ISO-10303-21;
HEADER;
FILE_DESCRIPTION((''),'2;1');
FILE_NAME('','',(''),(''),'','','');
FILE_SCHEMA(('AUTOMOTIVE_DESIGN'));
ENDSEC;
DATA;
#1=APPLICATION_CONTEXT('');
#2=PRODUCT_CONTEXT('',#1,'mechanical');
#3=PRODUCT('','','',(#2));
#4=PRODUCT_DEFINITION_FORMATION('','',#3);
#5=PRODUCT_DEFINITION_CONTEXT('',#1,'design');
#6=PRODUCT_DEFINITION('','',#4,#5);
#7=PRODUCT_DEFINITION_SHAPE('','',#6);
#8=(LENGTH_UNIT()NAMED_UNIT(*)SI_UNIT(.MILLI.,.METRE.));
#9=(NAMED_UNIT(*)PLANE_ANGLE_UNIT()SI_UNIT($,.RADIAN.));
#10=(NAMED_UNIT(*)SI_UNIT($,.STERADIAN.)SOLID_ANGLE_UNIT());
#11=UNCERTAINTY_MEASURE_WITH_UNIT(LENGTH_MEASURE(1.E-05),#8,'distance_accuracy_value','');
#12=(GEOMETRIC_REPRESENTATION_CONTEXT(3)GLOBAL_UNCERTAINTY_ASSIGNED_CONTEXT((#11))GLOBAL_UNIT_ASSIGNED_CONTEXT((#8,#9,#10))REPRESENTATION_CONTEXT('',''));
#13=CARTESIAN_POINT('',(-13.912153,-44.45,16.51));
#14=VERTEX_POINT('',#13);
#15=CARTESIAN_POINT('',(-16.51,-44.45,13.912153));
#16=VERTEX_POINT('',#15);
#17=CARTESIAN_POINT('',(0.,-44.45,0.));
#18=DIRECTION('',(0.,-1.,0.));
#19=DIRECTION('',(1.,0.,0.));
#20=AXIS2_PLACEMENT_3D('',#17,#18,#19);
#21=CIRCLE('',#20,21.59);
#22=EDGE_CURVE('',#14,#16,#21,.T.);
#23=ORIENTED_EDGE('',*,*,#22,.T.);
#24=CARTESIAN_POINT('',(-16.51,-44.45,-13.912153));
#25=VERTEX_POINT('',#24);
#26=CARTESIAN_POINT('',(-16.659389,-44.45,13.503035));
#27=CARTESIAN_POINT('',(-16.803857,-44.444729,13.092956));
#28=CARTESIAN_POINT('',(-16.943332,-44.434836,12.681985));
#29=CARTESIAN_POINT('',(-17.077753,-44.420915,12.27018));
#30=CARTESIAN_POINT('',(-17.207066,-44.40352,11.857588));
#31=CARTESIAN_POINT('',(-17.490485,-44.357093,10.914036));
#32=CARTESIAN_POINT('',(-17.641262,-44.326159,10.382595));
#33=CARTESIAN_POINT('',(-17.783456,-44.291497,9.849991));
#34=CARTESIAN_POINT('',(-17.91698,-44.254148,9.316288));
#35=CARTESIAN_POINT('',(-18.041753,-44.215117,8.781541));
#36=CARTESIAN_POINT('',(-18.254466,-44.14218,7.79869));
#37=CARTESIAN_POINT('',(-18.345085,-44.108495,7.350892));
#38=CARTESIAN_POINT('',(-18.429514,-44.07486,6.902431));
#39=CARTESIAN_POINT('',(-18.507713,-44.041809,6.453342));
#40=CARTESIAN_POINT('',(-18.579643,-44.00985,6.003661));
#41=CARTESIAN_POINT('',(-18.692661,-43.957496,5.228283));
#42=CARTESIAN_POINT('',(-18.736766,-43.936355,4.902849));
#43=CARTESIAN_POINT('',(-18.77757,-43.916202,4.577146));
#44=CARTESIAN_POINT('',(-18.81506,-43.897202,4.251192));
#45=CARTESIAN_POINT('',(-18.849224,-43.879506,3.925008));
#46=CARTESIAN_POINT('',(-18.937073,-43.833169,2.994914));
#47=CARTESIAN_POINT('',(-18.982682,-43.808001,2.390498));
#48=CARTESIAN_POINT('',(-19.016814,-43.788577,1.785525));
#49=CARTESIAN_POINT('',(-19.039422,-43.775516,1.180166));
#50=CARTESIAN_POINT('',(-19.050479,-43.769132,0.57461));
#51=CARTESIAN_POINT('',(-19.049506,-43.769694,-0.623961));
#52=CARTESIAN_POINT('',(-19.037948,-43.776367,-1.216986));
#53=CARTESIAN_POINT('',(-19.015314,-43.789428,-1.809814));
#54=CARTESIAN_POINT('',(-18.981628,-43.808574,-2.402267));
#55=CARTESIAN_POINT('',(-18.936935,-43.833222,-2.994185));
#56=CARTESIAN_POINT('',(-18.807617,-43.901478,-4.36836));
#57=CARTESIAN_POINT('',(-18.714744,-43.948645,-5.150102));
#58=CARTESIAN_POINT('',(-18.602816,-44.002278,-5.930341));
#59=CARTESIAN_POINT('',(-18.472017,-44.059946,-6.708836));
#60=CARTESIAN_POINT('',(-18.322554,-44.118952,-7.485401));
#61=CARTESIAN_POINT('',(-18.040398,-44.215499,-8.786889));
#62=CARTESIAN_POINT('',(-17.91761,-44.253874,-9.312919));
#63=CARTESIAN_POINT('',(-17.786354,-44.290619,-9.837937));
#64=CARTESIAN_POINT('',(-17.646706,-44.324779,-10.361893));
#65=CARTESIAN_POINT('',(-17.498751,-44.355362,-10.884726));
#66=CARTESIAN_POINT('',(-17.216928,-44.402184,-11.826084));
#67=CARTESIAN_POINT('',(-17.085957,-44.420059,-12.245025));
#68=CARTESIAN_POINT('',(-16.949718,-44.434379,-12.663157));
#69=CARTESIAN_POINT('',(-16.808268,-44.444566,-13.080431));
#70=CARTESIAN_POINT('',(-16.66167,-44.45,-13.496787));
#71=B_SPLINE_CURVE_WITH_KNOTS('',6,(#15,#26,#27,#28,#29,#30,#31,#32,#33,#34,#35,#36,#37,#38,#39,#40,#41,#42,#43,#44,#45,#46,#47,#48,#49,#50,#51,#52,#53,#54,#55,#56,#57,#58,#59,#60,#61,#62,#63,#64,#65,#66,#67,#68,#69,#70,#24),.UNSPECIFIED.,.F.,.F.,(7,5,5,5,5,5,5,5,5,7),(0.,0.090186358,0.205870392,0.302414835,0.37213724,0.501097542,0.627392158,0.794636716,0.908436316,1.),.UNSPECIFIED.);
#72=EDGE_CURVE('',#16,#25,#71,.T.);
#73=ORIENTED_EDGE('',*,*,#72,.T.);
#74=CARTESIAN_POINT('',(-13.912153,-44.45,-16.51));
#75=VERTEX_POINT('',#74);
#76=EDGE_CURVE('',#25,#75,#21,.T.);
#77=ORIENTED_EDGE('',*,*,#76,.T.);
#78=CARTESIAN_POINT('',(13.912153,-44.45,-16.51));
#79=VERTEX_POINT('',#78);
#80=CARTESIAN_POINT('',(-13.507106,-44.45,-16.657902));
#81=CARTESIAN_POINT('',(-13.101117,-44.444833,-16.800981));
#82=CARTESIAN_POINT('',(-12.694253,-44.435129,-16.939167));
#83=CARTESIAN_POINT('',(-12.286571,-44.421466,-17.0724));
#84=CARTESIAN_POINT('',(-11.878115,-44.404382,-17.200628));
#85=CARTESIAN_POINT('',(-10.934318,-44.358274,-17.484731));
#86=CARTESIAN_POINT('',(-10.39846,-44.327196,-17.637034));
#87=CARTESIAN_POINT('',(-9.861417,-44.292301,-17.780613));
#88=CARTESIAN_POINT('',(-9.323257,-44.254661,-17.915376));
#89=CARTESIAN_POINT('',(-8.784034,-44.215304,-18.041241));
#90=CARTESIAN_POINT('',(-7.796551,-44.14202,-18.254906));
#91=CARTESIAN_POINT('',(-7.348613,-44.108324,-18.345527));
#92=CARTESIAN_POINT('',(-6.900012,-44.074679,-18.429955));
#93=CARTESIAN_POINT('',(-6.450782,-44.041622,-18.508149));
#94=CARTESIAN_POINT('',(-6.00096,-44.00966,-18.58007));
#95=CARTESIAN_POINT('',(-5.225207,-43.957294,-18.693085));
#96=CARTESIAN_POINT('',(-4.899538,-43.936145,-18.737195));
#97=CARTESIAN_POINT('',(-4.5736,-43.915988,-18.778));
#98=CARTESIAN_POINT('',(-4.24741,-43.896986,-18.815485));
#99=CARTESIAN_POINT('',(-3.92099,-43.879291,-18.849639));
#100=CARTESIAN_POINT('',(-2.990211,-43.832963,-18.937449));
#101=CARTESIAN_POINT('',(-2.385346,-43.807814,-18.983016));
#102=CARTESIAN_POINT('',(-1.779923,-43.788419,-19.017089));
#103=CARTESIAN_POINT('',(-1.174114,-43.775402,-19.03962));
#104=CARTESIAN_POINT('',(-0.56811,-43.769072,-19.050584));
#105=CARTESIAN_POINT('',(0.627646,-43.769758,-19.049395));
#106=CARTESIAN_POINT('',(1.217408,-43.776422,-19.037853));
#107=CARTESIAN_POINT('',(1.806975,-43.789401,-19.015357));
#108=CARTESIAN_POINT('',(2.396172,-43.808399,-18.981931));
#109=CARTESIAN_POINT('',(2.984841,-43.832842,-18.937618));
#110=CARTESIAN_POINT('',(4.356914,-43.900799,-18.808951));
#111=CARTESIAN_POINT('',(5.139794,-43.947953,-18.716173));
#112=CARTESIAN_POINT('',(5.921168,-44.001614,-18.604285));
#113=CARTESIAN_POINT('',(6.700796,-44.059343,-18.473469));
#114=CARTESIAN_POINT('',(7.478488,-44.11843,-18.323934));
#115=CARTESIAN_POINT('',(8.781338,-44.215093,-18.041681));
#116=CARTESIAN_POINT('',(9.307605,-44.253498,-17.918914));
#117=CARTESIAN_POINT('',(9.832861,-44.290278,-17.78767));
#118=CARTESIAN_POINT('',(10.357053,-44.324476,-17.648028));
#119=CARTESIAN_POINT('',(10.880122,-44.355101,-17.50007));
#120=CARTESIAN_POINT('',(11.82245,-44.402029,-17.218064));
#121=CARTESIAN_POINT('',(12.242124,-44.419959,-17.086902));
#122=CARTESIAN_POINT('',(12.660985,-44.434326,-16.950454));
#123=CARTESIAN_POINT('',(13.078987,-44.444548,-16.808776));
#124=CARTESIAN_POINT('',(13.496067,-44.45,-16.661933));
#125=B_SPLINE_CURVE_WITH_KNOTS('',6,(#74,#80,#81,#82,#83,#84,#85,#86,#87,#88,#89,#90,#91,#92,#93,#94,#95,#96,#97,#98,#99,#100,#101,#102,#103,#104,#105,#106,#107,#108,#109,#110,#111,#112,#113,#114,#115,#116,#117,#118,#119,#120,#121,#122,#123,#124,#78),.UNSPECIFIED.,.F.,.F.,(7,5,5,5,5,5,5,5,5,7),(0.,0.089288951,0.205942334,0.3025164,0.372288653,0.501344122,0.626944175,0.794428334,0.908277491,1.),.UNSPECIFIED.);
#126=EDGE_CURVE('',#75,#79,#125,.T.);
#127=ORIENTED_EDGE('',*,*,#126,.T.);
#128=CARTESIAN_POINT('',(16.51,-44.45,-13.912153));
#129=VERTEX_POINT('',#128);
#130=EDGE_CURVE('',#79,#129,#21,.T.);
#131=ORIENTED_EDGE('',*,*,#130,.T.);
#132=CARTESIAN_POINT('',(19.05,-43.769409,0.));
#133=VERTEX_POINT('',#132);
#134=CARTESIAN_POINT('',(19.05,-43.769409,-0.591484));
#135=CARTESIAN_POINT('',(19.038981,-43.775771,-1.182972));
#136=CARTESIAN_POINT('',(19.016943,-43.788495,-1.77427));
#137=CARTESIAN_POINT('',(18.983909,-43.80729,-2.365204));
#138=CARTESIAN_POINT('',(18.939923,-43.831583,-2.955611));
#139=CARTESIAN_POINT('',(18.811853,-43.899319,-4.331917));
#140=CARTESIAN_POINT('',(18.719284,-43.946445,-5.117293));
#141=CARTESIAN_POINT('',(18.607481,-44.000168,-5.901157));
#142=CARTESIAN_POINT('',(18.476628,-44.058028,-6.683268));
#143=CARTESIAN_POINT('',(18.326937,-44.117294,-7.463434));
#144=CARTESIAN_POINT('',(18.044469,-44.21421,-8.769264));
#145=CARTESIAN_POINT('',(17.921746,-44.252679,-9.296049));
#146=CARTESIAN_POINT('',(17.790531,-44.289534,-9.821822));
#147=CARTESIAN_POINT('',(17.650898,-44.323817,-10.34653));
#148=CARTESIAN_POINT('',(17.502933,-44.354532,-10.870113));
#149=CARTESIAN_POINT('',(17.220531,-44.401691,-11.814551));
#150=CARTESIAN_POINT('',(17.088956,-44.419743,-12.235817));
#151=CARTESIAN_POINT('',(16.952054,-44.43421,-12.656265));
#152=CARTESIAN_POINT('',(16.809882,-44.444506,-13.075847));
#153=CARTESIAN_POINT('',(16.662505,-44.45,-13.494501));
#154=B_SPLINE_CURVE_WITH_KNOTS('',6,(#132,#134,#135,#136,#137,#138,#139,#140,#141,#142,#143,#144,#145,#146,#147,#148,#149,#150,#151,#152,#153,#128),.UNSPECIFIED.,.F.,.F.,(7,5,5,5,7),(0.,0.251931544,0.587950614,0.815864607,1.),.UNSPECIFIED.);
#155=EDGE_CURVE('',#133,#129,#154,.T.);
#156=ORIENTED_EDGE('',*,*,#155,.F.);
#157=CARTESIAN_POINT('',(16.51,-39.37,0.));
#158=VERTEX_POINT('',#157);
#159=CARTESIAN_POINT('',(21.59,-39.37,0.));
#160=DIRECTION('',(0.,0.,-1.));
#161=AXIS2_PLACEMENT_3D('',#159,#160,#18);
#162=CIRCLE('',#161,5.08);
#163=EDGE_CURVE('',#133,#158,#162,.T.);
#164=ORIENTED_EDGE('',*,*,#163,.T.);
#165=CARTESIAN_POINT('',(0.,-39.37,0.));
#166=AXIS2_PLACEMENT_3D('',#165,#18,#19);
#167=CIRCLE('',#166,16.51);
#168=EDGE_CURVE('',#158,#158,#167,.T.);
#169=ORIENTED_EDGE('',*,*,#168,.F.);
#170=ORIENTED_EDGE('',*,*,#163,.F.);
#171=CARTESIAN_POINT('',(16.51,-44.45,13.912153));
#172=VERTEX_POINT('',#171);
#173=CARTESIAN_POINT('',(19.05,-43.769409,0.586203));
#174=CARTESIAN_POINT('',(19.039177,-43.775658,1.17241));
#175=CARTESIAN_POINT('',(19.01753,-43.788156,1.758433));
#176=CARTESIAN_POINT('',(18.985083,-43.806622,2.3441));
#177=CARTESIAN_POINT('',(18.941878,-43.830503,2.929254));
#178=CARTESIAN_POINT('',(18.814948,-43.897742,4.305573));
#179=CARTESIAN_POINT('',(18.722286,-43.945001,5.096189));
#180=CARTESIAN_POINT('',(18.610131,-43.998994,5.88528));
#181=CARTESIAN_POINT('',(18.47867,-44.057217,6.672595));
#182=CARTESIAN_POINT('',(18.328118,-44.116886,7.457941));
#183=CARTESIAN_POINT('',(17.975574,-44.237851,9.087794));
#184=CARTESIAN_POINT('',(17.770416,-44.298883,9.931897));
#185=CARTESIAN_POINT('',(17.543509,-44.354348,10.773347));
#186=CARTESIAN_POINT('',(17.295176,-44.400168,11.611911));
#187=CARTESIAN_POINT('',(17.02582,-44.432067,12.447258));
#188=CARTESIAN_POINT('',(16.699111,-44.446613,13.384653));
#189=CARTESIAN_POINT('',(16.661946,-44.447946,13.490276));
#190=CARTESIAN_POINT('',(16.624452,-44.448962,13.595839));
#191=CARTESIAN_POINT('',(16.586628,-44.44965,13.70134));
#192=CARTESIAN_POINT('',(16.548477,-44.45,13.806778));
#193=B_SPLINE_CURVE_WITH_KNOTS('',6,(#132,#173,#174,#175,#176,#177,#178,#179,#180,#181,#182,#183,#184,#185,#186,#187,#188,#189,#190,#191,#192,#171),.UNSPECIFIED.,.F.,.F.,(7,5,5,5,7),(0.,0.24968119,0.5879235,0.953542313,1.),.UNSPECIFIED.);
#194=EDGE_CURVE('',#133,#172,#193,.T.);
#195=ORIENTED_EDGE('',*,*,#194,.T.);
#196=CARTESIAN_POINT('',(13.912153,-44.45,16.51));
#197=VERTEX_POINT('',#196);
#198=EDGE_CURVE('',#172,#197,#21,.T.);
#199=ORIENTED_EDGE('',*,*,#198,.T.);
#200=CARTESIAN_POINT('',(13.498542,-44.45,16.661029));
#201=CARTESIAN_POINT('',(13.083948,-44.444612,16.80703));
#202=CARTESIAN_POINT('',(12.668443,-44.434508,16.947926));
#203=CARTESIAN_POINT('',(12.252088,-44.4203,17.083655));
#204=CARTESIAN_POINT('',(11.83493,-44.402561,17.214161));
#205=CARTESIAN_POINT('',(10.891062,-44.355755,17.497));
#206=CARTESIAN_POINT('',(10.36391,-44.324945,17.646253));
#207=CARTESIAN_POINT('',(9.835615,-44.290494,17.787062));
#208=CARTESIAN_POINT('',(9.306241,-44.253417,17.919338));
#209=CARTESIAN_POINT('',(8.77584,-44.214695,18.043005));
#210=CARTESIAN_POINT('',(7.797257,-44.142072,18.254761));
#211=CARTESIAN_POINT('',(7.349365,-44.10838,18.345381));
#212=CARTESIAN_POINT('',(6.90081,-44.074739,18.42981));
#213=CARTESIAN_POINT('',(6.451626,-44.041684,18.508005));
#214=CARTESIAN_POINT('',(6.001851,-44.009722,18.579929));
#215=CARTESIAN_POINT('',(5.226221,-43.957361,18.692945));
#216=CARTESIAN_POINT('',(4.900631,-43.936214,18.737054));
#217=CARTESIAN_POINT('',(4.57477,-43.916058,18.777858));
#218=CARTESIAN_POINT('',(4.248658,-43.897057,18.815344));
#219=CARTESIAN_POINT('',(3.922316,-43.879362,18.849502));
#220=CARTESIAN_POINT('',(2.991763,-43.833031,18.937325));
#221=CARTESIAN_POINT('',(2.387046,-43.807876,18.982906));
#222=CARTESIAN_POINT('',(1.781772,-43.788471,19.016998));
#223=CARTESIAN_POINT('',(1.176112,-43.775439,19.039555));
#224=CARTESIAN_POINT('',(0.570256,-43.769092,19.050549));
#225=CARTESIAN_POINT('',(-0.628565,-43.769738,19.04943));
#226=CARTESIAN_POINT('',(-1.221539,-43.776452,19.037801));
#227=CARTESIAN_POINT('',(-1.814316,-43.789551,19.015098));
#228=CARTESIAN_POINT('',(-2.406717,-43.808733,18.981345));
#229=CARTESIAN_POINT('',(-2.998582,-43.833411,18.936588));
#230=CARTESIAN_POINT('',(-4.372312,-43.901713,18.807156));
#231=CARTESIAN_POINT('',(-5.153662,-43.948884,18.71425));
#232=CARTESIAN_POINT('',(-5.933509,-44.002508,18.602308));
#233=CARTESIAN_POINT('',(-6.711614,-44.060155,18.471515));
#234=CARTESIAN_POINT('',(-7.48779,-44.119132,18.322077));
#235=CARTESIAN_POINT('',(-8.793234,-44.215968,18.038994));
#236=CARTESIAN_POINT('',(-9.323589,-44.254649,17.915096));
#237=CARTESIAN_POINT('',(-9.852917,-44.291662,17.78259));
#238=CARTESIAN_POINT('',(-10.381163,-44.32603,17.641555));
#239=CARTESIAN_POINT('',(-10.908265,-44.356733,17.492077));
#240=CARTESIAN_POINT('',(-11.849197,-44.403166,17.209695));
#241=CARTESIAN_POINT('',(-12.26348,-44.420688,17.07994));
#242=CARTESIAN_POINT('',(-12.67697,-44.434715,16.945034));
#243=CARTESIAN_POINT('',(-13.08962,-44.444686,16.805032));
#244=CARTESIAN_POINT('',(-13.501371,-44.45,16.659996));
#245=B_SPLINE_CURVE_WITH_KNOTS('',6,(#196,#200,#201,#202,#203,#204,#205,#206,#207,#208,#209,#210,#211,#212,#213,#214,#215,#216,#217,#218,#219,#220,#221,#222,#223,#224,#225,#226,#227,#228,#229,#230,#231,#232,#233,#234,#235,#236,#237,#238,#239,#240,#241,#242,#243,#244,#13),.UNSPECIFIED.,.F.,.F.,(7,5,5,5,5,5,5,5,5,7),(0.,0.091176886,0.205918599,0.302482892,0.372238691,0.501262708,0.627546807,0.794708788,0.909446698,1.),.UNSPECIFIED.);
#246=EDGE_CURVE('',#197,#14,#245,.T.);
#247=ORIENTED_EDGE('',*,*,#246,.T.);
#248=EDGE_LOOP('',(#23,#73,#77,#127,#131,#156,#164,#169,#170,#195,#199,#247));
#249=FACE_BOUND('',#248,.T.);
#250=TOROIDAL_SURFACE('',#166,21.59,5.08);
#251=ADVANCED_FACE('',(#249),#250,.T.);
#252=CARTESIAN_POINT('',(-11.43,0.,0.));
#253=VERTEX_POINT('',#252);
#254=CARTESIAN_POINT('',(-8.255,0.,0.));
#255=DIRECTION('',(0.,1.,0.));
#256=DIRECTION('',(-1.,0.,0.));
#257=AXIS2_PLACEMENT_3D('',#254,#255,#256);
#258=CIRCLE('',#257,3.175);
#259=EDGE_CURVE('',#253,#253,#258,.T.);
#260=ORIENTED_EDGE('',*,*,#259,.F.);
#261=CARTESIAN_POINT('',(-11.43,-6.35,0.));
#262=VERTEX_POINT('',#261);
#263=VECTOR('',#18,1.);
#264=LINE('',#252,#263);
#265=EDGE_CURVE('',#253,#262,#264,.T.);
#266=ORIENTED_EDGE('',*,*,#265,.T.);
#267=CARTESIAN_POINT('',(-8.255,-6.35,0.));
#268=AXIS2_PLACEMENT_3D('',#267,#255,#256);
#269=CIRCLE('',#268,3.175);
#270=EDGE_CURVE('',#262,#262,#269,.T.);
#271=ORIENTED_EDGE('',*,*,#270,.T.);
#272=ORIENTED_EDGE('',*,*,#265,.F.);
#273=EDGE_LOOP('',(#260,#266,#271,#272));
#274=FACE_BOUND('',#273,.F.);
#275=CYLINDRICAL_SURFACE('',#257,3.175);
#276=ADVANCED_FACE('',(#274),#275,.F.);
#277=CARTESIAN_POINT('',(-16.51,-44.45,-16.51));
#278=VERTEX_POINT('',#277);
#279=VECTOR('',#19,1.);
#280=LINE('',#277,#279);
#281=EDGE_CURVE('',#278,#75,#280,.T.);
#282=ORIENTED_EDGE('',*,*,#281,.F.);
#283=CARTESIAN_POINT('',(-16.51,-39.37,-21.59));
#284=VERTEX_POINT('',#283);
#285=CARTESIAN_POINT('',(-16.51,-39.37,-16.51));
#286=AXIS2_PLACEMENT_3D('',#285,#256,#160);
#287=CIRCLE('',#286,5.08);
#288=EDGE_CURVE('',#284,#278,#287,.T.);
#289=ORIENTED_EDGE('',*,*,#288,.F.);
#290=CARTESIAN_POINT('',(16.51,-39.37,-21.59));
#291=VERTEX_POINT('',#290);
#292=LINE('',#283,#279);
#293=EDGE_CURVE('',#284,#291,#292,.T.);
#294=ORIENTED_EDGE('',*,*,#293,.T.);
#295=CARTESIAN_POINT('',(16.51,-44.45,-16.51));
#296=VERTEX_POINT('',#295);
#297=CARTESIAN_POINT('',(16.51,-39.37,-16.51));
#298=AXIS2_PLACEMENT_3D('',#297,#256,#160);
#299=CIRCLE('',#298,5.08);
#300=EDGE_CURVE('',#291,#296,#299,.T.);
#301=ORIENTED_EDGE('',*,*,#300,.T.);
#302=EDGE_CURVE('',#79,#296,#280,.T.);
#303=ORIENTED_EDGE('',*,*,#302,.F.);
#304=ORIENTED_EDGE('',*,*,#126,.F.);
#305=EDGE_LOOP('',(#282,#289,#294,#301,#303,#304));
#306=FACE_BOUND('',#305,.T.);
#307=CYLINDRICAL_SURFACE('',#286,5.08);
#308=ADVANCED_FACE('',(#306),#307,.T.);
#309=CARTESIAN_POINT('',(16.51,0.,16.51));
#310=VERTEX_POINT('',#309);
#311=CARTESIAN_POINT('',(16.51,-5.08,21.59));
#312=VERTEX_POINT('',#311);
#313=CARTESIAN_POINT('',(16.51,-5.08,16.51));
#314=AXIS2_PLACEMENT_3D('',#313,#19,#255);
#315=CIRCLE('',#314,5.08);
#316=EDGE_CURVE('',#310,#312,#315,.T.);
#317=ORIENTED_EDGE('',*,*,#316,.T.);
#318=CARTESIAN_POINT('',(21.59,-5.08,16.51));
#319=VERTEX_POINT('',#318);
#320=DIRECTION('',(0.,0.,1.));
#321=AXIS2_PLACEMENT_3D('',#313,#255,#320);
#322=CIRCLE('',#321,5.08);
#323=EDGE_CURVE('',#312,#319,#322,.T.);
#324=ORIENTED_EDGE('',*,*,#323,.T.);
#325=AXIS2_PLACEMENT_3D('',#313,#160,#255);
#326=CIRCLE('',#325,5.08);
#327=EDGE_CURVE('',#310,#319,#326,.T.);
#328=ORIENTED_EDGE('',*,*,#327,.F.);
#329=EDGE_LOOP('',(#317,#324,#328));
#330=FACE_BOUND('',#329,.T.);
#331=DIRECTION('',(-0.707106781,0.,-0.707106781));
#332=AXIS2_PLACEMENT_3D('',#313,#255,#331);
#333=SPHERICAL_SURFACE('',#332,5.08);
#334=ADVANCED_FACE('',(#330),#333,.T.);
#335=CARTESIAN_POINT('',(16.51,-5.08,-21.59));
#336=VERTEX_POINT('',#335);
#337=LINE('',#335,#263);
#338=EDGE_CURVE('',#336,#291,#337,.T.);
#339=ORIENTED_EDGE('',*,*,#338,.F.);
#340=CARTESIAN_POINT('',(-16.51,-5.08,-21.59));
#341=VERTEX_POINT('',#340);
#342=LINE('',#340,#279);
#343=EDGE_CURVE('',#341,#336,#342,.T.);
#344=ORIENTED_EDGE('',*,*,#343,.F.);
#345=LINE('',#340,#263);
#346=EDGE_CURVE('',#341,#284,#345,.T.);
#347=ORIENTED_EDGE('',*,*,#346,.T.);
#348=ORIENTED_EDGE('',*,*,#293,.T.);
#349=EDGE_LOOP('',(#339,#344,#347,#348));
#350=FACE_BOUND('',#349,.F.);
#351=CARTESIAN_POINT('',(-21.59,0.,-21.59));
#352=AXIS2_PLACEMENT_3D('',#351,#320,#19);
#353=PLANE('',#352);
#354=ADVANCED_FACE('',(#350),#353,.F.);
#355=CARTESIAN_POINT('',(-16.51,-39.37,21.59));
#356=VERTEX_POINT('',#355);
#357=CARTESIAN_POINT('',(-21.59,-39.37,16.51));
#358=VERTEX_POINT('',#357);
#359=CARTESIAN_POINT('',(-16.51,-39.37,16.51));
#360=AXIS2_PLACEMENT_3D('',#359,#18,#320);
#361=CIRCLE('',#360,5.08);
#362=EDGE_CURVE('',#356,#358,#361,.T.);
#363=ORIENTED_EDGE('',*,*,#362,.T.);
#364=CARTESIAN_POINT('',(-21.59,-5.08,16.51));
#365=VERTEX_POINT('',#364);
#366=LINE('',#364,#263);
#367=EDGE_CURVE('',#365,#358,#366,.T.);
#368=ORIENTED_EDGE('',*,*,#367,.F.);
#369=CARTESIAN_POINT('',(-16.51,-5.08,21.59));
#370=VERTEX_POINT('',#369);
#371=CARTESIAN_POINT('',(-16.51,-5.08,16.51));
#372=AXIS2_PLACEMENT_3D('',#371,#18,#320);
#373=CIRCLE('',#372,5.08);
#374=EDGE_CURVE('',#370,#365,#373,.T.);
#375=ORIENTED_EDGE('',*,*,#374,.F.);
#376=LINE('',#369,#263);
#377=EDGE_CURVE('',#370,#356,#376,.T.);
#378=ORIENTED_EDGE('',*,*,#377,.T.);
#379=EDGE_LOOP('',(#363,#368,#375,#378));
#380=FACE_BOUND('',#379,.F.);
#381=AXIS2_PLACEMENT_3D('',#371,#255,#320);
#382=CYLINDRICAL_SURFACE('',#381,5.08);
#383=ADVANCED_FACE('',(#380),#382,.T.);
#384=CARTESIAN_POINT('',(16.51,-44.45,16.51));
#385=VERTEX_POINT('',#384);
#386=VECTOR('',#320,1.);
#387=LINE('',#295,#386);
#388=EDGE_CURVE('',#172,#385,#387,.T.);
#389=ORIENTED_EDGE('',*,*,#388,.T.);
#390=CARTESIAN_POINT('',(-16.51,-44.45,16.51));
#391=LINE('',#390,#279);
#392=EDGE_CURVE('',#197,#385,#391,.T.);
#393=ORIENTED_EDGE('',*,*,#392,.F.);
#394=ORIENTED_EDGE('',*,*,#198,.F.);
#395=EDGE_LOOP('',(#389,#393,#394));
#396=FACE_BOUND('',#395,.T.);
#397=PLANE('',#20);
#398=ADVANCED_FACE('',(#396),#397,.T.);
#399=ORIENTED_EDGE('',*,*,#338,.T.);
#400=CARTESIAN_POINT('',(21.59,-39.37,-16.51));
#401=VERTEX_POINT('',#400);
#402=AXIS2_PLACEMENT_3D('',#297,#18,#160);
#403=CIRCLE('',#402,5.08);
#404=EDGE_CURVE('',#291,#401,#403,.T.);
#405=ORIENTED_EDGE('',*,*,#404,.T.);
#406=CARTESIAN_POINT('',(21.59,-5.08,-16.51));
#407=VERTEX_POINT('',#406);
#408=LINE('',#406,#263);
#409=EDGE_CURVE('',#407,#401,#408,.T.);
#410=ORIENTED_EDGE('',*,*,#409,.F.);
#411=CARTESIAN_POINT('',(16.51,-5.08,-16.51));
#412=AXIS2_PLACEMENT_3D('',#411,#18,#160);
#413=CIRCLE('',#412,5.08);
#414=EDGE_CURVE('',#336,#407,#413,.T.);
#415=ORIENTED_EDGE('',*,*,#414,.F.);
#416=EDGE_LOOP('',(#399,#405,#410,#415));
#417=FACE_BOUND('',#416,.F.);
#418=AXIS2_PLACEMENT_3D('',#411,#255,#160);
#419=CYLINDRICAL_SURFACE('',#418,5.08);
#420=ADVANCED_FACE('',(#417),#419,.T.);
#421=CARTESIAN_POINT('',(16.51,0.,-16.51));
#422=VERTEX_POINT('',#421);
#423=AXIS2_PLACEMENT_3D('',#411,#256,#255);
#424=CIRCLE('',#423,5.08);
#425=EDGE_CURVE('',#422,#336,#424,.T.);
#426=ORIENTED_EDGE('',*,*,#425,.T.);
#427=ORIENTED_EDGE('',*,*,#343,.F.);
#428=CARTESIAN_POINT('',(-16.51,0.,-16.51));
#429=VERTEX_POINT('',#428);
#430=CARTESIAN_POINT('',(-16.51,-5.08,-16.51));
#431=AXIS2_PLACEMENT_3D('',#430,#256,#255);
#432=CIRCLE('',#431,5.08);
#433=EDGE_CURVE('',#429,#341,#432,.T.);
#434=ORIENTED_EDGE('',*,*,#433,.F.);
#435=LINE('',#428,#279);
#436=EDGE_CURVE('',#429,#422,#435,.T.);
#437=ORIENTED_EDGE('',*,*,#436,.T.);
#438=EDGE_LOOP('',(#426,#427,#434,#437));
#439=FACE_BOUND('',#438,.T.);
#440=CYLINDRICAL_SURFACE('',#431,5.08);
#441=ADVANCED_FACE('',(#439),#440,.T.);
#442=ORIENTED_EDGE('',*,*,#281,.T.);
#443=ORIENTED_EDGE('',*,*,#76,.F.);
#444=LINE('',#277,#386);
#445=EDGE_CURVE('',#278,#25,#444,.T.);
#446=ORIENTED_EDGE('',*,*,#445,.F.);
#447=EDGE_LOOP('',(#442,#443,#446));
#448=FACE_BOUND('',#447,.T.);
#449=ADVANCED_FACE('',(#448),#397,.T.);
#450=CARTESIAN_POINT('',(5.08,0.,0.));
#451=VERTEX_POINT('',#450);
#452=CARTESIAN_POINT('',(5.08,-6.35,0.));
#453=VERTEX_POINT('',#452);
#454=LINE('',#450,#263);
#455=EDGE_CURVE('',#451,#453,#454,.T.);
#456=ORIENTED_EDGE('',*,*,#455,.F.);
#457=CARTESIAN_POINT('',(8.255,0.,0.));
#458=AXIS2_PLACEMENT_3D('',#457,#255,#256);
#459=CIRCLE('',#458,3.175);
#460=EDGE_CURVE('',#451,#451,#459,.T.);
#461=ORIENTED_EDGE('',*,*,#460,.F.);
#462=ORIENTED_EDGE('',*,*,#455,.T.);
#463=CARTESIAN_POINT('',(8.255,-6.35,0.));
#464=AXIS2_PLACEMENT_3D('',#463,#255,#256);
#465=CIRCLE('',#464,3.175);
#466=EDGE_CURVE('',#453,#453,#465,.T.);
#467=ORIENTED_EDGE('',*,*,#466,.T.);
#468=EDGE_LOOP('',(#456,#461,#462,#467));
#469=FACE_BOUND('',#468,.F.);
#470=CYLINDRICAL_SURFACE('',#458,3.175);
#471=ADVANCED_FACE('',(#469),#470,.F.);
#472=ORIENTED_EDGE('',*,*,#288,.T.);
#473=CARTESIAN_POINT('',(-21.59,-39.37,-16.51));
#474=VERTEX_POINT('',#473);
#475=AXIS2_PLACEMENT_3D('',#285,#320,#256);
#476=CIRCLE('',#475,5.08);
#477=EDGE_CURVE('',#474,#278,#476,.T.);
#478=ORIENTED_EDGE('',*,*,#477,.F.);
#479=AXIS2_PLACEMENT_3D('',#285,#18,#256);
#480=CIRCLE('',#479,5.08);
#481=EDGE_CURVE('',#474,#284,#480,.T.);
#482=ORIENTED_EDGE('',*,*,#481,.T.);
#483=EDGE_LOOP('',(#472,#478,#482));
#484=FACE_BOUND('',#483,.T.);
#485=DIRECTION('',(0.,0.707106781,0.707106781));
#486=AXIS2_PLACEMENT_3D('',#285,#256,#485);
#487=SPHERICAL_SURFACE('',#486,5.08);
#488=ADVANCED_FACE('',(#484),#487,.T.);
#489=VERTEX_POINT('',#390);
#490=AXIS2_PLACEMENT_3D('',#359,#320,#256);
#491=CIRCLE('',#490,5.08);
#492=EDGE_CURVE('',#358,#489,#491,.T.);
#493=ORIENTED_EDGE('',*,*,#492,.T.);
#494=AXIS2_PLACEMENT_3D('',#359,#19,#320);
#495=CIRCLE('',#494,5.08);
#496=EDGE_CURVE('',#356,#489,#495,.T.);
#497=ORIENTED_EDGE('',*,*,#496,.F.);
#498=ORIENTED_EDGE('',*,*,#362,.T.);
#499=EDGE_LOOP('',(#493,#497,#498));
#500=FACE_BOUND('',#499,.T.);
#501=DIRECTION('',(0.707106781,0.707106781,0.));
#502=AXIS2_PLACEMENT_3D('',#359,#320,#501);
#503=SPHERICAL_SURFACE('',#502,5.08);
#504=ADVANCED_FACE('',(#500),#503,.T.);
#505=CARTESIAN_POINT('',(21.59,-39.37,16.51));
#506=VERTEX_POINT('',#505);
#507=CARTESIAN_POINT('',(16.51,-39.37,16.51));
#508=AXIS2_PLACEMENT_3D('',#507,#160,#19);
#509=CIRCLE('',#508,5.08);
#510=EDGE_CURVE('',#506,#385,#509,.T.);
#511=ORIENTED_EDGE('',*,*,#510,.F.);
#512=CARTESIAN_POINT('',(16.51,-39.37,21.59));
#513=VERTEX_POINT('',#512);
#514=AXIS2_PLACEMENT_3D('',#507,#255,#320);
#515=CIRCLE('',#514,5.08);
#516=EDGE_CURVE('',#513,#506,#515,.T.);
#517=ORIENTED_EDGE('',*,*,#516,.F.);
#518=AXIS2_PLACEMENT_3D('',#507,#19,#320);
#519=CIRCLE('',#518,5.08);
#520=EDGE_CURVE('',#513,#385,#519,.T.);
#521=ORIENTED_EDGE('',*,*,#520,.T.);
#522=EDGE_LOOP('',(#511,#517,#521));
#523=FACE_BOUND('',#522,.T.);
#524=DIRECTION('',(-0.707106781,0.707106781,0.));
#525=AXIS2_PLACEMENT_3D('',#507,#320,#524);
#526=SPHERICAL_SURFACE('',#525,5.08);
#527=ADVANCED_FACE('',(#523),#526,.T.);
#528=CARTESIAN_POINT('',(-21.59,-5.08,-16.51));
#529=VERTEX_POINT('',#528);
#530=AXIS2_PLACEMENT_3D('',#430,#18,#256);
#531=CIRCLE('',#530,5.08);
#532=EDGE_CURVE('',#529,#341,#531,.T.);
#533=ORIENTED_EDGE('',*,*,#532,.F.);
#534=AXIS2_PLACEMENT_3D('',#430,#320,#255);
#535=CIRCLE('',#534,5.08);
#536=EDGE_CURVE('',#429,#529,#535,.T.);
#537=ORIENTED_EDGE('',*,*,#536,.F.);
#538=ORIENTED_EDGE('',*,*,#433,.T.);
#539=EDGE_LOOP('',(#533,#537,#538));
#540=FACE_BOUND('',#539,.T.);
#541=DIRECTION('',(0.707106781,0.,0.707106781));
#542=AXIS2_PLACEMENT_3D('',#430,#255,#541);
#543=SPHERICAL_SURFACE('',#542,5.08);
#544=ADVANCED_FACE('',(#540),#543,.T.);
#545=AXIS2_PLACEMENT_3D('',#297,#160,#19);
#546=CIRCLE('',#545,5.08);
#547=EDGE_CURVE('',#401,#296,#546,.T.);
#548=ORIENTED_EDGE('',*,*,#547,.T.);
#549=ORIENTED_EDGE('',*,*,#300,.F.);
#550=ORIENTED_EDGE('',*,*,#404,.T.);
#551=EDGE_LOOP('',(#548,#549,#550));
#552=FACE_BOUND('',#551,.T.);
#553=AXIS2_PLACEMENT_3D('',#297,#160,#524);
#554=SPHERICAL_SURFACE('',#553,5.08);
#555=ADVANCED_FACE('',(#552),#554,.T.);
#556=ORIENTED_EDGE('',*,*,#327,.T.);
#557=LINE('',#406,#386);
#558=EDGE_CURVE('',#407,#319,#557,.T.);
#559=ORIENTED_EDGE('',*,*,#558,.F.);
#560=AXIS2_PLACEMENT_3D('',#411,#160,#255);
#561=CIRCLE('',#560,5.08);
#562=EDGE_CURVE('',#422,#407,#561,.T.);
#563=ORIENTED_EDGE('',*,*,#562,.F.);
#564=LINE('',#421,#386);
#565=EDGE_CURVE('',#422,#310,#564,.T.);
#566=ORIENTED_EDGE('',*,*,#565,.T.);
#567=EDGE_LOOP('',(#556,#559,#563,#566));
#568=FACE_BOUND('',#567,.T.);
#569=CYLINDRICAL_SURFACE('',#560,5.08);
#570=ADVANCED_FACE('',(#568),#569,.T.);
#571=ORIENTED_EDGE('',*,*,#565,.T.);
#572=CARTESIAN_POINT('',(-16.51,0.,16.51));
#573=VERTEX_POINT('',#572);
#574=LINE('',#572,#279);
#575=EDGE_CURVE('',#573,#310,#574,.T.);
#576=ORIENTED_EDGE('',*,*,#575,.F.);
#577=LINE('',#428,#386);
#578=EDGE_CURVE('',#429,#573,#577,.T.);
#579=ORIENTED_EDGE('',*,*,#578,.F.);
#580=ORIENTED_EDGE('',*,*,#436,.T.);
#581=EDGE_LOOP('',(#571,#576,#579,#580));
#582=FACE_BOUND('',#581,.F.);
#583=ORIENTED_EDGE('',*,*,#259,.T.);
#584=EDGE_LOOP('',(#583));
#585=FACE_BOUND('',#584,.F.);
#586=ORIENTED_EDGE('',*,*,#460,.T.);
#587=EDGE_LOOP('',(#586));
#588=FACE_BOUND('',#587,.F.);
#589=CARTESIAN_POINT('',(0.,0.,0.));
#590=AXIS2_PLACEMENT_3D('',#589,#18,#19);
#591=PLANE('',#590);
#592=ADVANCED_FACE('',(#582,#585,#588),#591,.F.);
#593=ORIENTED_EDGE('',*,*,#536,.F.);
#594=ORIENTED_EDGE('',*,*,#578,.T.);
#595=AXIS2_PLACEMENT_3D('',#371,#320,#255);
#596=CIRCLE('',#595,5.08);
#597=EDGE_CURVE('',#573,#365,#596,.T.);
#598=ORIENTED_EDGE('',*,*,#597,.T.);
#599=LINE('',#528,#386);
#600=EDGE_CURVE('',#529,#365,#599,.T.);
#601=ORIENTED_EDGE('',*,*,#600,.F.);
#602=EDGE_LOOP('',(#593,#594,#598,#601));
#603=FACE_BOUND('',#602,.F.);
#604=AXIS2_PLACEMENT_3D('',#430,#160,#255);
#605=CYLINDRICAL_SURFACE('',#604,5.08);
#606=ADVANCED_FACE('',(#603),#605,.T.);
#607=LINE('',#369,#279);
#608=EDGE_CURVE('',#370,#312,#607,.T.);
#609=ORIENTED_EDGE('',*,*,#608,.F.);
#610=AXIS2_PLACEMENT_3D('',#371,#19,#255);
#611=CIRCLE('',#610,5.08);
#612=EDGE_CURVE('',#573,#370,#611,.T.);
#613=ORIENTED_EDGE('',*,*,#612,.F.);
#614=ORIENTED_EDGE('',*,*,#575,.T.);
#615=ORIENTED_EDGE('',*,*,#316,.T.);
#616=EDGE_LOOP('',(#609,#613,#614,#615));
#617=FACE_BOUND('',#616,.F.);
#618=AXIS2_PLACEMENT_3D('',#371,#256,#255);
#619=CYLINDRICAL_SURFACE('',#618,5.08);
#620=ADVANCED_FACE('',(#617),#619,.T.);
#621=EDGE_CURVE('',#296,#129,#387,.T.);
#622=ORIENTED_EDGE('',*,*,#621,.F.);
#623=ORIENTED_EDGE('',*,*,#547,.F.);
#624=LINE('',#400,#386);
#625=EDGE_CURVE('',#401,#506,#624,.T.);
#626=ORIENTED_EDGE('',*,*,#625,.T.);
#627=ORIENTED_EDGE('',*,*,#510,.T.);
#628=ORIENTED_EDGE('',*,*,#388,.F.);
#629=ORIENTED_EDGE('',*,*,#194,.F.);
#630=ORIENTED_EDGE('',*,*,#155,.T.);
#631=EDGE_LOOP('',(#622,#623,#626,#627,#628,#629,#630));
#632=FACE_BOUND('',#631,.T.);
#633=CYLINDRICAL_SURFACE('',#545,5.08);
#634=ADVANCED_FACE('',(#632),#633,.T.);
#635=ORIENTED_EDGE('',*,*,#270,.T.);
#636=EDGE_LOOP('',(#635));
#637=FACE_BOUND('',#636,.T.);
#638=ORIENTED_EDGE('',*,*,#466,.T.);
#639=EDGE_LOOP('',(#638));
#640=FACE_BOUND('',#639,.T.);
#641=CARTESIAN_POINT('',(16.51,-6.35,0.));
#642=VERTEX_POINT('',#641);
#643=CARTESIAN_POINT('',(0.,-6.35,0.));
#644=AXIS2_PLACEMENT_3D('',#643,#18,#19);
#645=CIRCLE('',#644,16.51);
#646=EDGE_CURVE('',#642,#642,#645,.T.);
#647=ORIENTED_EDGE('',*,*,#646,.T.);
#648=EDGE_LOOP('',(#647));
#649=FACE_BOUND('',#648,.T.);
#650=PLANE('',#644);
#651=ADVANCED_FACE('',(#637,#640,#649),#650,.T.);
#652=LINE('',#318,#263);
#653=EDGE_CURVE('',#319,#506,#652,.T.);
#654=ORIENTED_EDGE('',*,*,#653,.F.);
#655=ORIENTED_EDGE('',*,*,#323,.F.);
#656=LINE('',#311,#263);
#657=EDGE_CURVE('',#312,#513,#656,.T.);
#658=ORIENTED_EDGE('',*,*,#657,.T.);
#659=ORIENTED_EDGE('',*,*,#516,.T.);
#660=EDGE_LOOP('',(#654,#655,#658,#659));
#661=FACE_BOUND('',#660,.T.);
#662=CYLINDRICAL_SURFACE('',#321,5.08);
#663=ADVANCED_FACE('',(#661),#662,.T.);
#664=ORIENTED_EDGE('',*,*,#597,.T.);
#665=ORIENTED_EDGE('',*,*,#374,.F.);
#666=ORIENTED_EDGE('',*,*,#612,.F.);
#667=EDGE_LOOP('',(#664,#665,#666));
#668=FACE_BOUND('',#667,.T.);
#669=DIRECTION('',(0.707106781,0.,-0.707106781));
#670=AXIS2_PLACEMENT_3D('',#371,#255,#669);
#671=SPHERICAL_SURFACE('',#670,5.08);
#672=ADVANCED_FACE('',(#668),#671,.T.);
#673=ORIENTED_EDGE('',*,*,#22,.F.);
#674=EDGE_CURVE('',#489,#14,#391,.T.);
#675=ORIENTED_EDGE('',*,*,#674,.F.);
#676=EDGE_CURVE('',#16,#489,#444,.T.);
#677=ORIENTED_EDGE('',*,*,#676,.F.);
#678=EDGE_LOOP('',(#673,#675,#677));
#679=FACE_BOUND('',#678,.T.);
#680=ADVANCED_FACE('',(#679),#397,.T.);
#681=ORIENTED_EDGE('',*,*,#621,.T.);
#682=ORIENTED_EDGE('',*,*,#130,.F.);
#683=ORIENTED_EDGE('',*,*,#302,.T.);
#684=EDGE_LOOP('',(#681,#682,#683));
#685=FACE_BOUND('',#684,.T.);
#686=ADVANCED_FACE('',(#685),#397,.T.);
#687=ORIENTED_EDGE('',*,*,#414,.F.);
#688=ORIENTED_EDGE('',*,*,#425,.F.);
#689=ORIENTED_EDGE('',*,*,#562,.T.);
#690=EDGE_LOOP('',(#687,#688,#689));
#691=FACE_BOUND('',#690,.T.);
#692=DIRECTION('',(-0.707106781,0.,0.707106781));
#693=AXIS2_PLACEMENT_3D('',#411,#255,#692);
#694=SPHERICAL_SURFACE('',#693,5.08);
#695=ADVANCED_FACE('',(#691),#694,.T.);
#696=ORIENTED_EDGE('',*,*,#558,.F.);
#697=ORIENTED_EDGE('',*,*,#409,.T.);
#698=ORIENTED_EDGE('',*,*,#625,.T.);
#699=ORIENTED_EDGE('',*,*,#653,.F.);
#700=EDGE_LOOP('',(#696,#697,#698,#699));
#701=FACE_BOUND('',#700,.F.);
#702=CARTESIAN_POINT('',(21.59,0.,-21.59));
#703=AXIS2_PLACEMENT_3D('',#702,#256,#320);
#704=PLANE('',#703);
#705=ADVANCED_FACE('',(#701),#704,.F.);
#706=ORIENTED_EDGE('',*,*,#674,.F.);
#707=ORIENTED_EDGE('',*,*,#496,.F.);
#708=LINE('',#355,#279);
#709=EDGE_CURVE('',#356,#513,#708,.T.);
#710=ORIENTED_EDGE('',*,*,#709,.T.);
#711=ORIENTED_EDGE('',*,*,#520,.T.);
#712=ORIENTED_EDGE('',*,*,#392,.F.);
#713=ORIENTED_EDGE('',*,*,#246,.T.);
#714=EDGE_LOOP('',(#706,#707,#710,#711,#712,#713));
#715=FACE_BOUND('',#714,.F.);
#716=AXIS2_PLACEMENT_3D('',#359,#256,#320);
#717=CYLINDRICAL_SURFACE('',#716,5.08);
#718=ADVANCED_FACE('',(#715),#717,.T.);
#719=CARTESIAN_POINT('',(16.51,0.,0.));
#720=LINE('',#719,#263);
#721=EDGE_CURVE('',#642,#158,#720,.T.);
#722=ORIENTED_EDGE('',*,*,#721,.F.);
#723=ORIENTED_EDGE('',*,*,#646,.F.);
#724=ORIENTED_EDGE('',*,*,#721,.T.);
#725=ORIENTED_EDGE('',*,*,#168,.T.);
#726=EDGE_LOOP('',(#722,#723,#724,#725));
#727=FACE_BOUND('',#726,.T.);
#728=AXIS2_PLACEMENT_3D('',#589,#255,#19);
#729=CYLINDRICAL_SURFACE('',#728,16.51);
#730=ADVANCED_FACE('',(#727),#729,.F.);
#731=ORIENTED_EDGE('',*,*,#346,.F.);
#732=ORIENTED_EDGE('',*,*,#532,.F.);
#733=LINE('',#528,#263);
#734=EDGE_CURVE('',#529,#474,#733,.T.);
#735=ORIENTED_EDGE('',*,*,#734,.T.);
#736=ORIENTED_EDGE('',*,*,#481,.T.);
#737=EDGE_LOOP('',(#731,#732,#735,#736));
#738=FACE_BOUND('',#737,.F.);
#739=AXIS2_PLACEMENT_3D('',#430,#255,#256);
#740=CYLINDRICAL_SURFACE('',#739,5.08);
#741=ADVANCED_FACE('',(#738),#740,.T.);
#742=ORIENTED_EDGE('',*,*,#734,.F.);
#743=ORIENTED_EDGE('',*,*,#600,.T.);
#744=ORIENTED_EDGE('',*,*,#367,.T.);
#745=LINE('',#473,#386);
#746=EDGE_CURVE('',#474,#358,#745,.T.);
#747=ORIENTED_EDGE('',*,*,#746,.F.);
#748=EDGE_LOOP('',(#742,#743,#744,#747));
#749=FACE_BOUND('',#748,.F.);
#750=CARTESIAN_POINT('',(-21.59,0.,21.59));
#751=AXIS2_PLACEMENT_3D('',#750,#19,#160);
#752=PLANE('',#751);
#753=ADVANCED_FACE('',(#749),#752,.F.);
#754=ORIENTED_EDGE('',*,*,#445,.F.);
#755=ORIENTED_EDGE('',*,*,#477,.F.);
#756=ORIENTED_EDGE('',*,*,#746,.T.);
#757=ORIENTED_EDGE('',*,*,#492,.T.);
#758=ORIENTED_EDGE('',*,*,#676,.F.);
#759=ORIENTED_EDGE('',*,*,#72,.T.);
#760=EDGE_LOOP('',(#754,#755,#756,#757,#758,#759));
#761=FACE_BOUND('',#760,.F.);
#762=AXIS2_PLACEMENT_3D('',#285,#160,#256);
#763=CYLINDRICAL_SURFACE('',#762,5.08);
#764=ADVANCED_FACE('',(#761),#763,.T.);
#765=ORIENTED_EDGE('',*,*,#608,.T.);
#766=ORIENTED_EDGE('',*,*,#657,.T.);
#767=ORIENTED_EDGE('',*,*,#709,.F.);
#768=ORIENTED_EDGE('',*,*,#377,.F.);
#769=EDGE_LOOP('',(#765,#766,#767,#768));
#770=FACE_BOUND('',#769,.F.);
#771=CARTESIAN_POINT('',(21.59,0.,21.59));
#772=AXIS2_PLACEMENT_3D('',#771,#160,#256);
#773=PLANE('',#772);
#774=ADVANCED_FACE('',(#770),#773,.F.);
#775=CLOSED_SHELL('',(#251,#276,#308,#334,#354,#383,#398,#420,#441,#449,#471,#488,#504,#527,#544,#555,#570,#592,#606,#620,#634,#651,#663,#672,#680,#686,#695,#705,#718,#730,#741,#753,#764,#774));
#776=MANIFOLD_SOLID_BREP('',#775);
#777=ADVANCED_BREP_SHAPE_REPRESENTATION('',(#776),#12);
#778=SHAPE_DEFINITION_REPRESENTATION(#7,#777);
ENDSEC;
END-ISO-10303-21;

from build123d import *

# Parameters (mm, degrees)
F0_R         = 16.51
F1_DEPTH     = 6.35
F2_DEPTH     = 44.45
F3_T1_DEPTH  = 34.29
F3_T3_DEPTH  = 33.02
F3_T5_DEPTH  = 33.02
F3_S9_W      = 5.08
F3_S9_H      = 5.08
F3_T10_DEPTH = 5.08
F3_S15_W     = 5.08
F3_S15_H     = 5.08
F3_T16_DEPTH = 5.08
F3_S21_W     = 5.08
F3_S21_H     = 5.08
F3_T22_DEPTH = 5.08
F3_S27_W     = 5.08
F3_S27_H     = 5.08
F3_T28_DEPTH = 5.08
F3_S33_W     = 5.08
F3_S33_H     = 5.08
F3_T34_DEPTH = 5.08
F3_S39_W     = 5.08
F3_S39_H     = 5.08
F3_T40_DEPTH = 5.08
F3_S45_W     = 5.08
F3_S45_H     = 5.08
F3_T46_DEPTH = 5.08
F3_S51_W     = 5.08
F3_S51_H     = 5.08
F3_T52_DEPTH = 5.08
F4_R         = 3.175
F5_DEPTH     = 25.4


# Not quite as in the source:
# - a fillet or chamfer that OpenCascade refuses, or shapes differently, is made with other operations: its cross-section is extruded or revolved along the edge and cut away or added


with BuildPart() as f1:
    # F0 (on Front) → F1 (new body)
    with BuildSketch(Plane.XZ):
        Circle(F0_R)
    extrude(amount=F1_DEPTH)

    # F0 (on Front) → F2 (join)
    with BuildSketch(Plane.XZ):
        Polygon((21.59, 21.59), (0, 21.59), (-21.59, 21.59), (-21.59, 0), (-21.59, -21.59), (21.59, -21.59), align=None)
        Circle(F0_R, mode=Mode.SUBTRACT)
    extrude(amount=F2_DEPTH)

    # F3: fillet of radius 5.08 on 13 edges, made by hand

    # F3_s2 → F3_t1 (cut)
    with BuildSketch(Plane.XZ.offset(5.08)):
        with BuildLine():
            ThreePointArc((16.51, 21.59), (20.1021024484, 20.1021024484), (21.59, 16.51))
            Line((21.59, 16.51), (21.59, 21.59))
            Line((21.59, 21.59), (16.51, 21.59))
        make_face()
        with BuildLine():
            ThreePointArc((-16.51, 21.59), (-20.1021024484, 20.1021024484), (-21.59, 16.51))
            Line((-21.59, 16.51), (-21.59, 21.59))
            Line((-21.59, 21.59), (-16.51, 21.59))
        make_face()
        with BuildLine():
            ThreePointArc((-21.59, -16.51), (-20.1021024484, -20.1021024484), (-16.51, -21.59))
            Line((-16.51, -21.59), (-21.59, -21.59))
            Line((-21.59, -21.59), (-21.59, -16.51))
        make_face()
        with BuildLine():
            ThreePointArc((16.51, -21.59), (20.1021024484, -20.1021024484), (21.59, -16.51))
            Line((21.59, -16.51), (21.59, -21.59))
            Line((21.59, -21.59), (16.51, -21.59))
        make_face()
    extrude(amount=F3_T1_DEPTH, mode=Mode.SUBTRACT)

    # F3_s4 → F3_t3 (cut)
    with BuildSketch(Plane.YZ.offset(-16.51)):
        with BuildLine():
            ThreePointArc((0, -16.51), (-1.4878975516, -20.1021024484), (-5.08, -21.59))
            Line((-5.08, -21.59), (0, -21.59))
            Line((0, -21.59), (0, -16.51))
        make_face()
        with BuildLine():
            ThreePointArc((0, 16.51), (-1.4878975516, 20.1021024484), (-5.08, 21.59))
            Line((-5.08, 21.59), (0, 21.59))
            Line((0, 21.59), (0, 16.51))
        make_face()
        with BuildLine():
            ThreePointArc((-39.37, -21.59), (-42.9621024484, -20.1021024484), (-44.45, -16.51))
            Line((-44.45, -16.51), (-44.45, -21.59))
            Line((-44.45, -21.59), (-39.37, -21.59))
        make_face()
        with BuildLine():
            ThreePointArc((-39.37, 21.59), (-42.9621024484, 20.1021024484), (-44.45, 16.51))
            Line((-44.45, 16.51), (-44.45, 21.59))
            Line((-44.45, 21.59), (-39.37, 21.59))
        make_face()
    extrude(amount=F3_T3_DEPTH, mode=Mode.SUBTRACT)

    # F3_s6 → F3_t5 (cut)
    with BuildSketch(Plane.XY.offset(-16.51)):
        with BuildLine():
            ThreePointArc((16.51, 0), (20.1021024484, -1.4878975516), (21.59, -5.08))
            Line((21.59, -5.08), (21.59, 0))
            Line((21.59, 0), (16.51, 0))
        make_face()
        with BuildLine():
            ThreePointArc((-16.51, 0), (-20.1021024484, -1.4878975516), (-21.59, -5.08))
            Line((-21.59, -5.08), (-21.59, 0))
            Line((-21.59, 0), (-16.51, 0))
        make_face()
        with BuildLine():
            ThreePointArc((21.59, -39.37), (20.1021024484, -42.9621024484), (16.51, -44.45))
            Line((16.51, -44.45), (21.59, -44.45))
            Line((21.59, -44.45), (21.59, -39.37))
        make_face()
        with BuildLine():
            ThreePointArc((-21.59, -39.37), (-20.1021024484, -42.9621024484), (-16.51, -44.45))
            Line((-16.51, -44.45), (-21.59, -44.45))
            Line((-21.59, -44.45), (-21.59, -39.37))
        make_face()
    extrude(amount=F3_T5_DEPTH, mode=Mode.SUBTRACT)


with BuildPart() as f3_tool8:
    # F3_s9 → F3_t10 (new body)
    with BuildSketch(Plane.XZ.offset(5.08)):
        with Locations((19.05, 19.05)):
            Rectangle(F3_S9_W, F3_S9_H)
    extrude(amount=-F3_T10_DEPTH)

    # F3_s11 → F3_t12 (revolve, cut)
    with BuildSketch(Plane(origin=(16.51, -5.08, 16.51), x_dir=(-0.7071067812, 0, -0.7071067812), z_dir=(0.7071067812, 0, -0.7071067812))):
        with BuildLine():
            ThreePointArc((0, -5.08), (5.08, 0), (0, 5.08))
            Line((0, 5.08), (0, -5.08))
        make_face()
    revolve(axis=Axis((16.51, -5.08, 16.51), (0, 1, 0)), mode=Mode.SUBTRACT)


with BuildPart() as f1_1:
    add(f1.part)

    # F3_t7: cut F3_tool8
    add(f3_tool8.part, mode=Mode.SUBTRACT)


with BuildPart() as f3_tool14:
    # F3_s15 → F3_t16 (new body)
    with BuildSketch(Plane.XY.offset(16.51)):
        with Locations((19.05, -41.91)):
            Rectangle(F3_S15_W, F3_S15_H)
    extrude(amount=F3_T16_DEPTH)

    # F3_s17 → F3_t18 (revolve, cut)
    with BuildSketch(Plane(origin=(16.51, -39.37, 16.51), x_dir=(-0.7071067812, 0.7071067812, 0), z_dir=(0.7071067812, 0.7071067812, 0))):
        with BuildLine():
            ThreePointArc((0, -5.08), (5.08, 0), (0, 5.08))
            Line((0, 5.08), (0, -5.08))
        make_face()
    revolve(axis=Axis((16.51, -39.37, 16.51), (0, 0, 1)), mode=Mode.SUBTRACT)


with BuildPart() as f1_2:
    add(f1_1.part)

    # F3_t13: cut F3_tool14
    add(f3_tool14.part, mode=Mode.SUBTRACT)


with BuildPart() as f3_tool20:
    # F3_s21 → F3_t22 (new body)
    with BuildSketch(Plane.XZ.offset(5.08)):
        with Locations((-19.05, 19.05)):
            Rectangle(F3_S21_W, F3_S21_H)
    extrude(amount=-F3_T22_DEPTH)

    # F3_s23 → F3_t24 (revolve, cut)
    with BuildSketch(Plane(origin=(-16.51, -5.08, 16.51), x_dir=(0.7071067812, 0, -0.7071067812), z_dir=(0.7071067812, 0, 0.7071067812))):
        with BuildLine():
            ThreePointArc((0, -5.08), (5.08, 0), (0, 5.08))
            Line((0, 5.08), (0, -5.08))
        make_face()
    revolve(axis=Axis((-16.51, -5.08, 16.51), (0, 1, 0)), mode=Mode.SUBTRACT)


with BuildPart() as f1_3:
    add(f1_2.part)

    # F3_t19: cut F3_tool20
    add(f3_tool20.part, mode=Mode.SUBTRACT)


with BuildPart() as f3_tool26:
    # F3_s27 → F3_t28 (new body)
    with BuildSketch(Plane.XY.offset(16.51)):
        with Locations((-19.05, -41.91)):
            Rectangle(F3_S27_W, F3_S27_H)
    extrude(amount=F3_T28_DEPTH)

    # F3_s29 → F3_t30 (revolve, cut)
    with BuildSketch(Plane(origin=(-16.51, -39.37, 16.51), x_dir=(0.7071067812, 0.7071067812, 0), z_dir=(0.7071067812, -0.7071067812, 0))):
        with BuildLine():
            ThreePointArc((0, -5.08), (5.08, 0), (0, 5.08))
            Line((0, 5.08), (0, -5.08))
        make_face()
    revolve(axis=Axis((-16.51, -39.37, 16.51), (0, 0, 1)), mode=Mode.SUBTRACT)


with BuildPart() as f1_4:
    add(f1_3.part)

    # F3_t25: cut F3_tool26
    add(f3_tool26.part, mode=Mode.SUBTRACT)


with BuildPart() as f3_tool32:
    # F3_s33 → F3_t34 (new body)
    with BuildSketch(Plane.XZ.offset(5.08)):
        with Locations((-19.05, -19.05)):
            Rectangle(F3_S33_W, F3_S33_H)
    extrude(amount=-F3_T34_DEPTH)

    # F3_s35 → F3_t36 (revolve, cut)
    with BuildSketch(Plane(origin=(-16.51, -5.08, -16.51), x_dir=(0.7071067812, 0, 0.7071067812), z_dir=(-0.7071067812, 0, 0.7071067812))):
        with BuildLine():
            ThreePointArc((0, -5.08), (5.08, 0), (0, 5.08))
            Line((0, 5.08), (0, -5.08))
        make_face()
    revolve(axis=Axis((-16.51, -5.08, -16.51), (0, 1, 0)), mode=Mode.SUBTRACT)


with BuildPart() as f1_5:
    add(f1_4.part)

    # F3_t31: cut F3_tool32
    add(f3_tool32.part, mode=Mode.SUBTRACT)


with BuildPart() as f3_tool38:
    # F3_s39 → F3_t40 (new body)
    with BuildSketch(Plane.YZ.offset(-16.51)):
        with Locations((-41.91, -19.05)):
            Rectangle(F3_S39_W, F3_S39_H)
    extrude(amount=-F3_T40_DEPTH)

    # F3_s41 → F3_t42 (revolve, cut)
    with BuildSketch(Plane(origin=(-16.51, -39.37, -16.51), x_dir=(0, 0.7071067812, 0.7071067812), z_dir=(0, -0.7071067812, 0.7071067812))):
        with BuildLine():
            ThreePointArc((0, -5.08), (5.08, 0), (0, 5.08))
            Line((0, 5.08), (0, -5.08))
        make_face()
    revolve(axis=Axis((-16.51, -39.37, -16.51), (-1, 0, 0)), mode=Mode.SUBTRACT)


with BuildPart() as f1_6:
    add(f1_5.part)

    # F3_t37: cut F3_tool38
    add(f3_tool38.part, mode=Mode.SUBTRACT)


with BuildPart() as f3_tool44:
    # F3_s45 → F3_t46 (new body)
    with BuildSketch(Plane.XZ.offset(5.08)):
        with Locations((19.05, -19.05)):
            Rectangle(F3_S45_W, F3_S45_H)
    extrude(amount=-F3_T46_DEPTH)

    # F3_s47 → F3_t48 (revolve, cut)
    with BuildSketch(Plane(origin=(16.51, -5.08, -16.51), x_dir=(-0.7071067812, 0, 0.7071067812), z_dir=(-0.7071067812, 0, -0.7071067812))):
        with BuildLine():
            ThreePointArc((0, -5.08), (5.08, 0), (0, 5.08))
            Line((0, 5.08), (0, -5.08))
        make_face()
    revolve(axis=Axis((16.51, -5.08, -16.51), (0, 1, 0)), mode=Mode.SUBTRACT)


with BuildPart() as f1_7:
    add(f1_6.part)

    # F3_t43: cut F3_tool44
    add(f3_tool44.part, mode=Mode.SUBTRACT)


with BuildPart() as f3_tool50:
    # F3_s51 → F3_t52 (new body)
    with BuildSketch(Plane.XY.offset(-16.51)):
        with Locations((19.05, -41.91)):
            Rectangle(F3_S51_W, F3_S51_H)
    extrude(amount=-F3_T52_DEPTH)

    # F3_s53 → F3_t54 (revolve, cut)
    with BuildSketch(Plane(origin=(16.51, -39.37, -16.51), x_dir=(-0.7071067812, 0.7071067812, 0), z_dir=(-0.7071067812, -0.7071067812, 0))):
        with BuildLine():
            ThreePointArc((0, -5.08), (5.08, 0), (0, 5.08))
            Line((0, 5.08), (0, -5.08))
        make_face()
    revolve(axis=Axis((16.51, -39.37, -16.51), (0, 0, -1)), mode=Mode.SUBTRACT)


with BuildPart() as f1_8:
    add(f1_7.part)

    # F3_t49: cut F3_tool50
    add(f3_tool50.part, mode=Mode.SUBTRACT)

    # F3_s55 → F3_t56 (revolve, cut)
    with BuildSketch(Plane.XY):
        with BuildLine():
            ThreePointArc((21.59, -44.45), (17.9978975516, -42.9621024484), (16.51, -39.37))
            Line((16.51, -39.37), (16.51, -44.45))
            Line((16.51, -44.45), (21.59, -44.45))
        make_face()
    revolve(axis=Axis((0, -44.45, 0), (0, -1, 0)), mode=Mode.SUBTRACT)

    # F4 (on face) → F5 (cut)
    with BuildSketch(Plane(origin=(0, 0, 0), x_dir=(-1, 0, 0), z_dir=(0, 1, 0))):
        with Locations((-8.255, 0)):
            Circle(F4_R)
        with Locations((8.255, 0)):
            Circle(F4_R)
    extrude(amount=-F5_DEPTH, mode=Mode.SUBTRACT)


solid = f1_8.part
